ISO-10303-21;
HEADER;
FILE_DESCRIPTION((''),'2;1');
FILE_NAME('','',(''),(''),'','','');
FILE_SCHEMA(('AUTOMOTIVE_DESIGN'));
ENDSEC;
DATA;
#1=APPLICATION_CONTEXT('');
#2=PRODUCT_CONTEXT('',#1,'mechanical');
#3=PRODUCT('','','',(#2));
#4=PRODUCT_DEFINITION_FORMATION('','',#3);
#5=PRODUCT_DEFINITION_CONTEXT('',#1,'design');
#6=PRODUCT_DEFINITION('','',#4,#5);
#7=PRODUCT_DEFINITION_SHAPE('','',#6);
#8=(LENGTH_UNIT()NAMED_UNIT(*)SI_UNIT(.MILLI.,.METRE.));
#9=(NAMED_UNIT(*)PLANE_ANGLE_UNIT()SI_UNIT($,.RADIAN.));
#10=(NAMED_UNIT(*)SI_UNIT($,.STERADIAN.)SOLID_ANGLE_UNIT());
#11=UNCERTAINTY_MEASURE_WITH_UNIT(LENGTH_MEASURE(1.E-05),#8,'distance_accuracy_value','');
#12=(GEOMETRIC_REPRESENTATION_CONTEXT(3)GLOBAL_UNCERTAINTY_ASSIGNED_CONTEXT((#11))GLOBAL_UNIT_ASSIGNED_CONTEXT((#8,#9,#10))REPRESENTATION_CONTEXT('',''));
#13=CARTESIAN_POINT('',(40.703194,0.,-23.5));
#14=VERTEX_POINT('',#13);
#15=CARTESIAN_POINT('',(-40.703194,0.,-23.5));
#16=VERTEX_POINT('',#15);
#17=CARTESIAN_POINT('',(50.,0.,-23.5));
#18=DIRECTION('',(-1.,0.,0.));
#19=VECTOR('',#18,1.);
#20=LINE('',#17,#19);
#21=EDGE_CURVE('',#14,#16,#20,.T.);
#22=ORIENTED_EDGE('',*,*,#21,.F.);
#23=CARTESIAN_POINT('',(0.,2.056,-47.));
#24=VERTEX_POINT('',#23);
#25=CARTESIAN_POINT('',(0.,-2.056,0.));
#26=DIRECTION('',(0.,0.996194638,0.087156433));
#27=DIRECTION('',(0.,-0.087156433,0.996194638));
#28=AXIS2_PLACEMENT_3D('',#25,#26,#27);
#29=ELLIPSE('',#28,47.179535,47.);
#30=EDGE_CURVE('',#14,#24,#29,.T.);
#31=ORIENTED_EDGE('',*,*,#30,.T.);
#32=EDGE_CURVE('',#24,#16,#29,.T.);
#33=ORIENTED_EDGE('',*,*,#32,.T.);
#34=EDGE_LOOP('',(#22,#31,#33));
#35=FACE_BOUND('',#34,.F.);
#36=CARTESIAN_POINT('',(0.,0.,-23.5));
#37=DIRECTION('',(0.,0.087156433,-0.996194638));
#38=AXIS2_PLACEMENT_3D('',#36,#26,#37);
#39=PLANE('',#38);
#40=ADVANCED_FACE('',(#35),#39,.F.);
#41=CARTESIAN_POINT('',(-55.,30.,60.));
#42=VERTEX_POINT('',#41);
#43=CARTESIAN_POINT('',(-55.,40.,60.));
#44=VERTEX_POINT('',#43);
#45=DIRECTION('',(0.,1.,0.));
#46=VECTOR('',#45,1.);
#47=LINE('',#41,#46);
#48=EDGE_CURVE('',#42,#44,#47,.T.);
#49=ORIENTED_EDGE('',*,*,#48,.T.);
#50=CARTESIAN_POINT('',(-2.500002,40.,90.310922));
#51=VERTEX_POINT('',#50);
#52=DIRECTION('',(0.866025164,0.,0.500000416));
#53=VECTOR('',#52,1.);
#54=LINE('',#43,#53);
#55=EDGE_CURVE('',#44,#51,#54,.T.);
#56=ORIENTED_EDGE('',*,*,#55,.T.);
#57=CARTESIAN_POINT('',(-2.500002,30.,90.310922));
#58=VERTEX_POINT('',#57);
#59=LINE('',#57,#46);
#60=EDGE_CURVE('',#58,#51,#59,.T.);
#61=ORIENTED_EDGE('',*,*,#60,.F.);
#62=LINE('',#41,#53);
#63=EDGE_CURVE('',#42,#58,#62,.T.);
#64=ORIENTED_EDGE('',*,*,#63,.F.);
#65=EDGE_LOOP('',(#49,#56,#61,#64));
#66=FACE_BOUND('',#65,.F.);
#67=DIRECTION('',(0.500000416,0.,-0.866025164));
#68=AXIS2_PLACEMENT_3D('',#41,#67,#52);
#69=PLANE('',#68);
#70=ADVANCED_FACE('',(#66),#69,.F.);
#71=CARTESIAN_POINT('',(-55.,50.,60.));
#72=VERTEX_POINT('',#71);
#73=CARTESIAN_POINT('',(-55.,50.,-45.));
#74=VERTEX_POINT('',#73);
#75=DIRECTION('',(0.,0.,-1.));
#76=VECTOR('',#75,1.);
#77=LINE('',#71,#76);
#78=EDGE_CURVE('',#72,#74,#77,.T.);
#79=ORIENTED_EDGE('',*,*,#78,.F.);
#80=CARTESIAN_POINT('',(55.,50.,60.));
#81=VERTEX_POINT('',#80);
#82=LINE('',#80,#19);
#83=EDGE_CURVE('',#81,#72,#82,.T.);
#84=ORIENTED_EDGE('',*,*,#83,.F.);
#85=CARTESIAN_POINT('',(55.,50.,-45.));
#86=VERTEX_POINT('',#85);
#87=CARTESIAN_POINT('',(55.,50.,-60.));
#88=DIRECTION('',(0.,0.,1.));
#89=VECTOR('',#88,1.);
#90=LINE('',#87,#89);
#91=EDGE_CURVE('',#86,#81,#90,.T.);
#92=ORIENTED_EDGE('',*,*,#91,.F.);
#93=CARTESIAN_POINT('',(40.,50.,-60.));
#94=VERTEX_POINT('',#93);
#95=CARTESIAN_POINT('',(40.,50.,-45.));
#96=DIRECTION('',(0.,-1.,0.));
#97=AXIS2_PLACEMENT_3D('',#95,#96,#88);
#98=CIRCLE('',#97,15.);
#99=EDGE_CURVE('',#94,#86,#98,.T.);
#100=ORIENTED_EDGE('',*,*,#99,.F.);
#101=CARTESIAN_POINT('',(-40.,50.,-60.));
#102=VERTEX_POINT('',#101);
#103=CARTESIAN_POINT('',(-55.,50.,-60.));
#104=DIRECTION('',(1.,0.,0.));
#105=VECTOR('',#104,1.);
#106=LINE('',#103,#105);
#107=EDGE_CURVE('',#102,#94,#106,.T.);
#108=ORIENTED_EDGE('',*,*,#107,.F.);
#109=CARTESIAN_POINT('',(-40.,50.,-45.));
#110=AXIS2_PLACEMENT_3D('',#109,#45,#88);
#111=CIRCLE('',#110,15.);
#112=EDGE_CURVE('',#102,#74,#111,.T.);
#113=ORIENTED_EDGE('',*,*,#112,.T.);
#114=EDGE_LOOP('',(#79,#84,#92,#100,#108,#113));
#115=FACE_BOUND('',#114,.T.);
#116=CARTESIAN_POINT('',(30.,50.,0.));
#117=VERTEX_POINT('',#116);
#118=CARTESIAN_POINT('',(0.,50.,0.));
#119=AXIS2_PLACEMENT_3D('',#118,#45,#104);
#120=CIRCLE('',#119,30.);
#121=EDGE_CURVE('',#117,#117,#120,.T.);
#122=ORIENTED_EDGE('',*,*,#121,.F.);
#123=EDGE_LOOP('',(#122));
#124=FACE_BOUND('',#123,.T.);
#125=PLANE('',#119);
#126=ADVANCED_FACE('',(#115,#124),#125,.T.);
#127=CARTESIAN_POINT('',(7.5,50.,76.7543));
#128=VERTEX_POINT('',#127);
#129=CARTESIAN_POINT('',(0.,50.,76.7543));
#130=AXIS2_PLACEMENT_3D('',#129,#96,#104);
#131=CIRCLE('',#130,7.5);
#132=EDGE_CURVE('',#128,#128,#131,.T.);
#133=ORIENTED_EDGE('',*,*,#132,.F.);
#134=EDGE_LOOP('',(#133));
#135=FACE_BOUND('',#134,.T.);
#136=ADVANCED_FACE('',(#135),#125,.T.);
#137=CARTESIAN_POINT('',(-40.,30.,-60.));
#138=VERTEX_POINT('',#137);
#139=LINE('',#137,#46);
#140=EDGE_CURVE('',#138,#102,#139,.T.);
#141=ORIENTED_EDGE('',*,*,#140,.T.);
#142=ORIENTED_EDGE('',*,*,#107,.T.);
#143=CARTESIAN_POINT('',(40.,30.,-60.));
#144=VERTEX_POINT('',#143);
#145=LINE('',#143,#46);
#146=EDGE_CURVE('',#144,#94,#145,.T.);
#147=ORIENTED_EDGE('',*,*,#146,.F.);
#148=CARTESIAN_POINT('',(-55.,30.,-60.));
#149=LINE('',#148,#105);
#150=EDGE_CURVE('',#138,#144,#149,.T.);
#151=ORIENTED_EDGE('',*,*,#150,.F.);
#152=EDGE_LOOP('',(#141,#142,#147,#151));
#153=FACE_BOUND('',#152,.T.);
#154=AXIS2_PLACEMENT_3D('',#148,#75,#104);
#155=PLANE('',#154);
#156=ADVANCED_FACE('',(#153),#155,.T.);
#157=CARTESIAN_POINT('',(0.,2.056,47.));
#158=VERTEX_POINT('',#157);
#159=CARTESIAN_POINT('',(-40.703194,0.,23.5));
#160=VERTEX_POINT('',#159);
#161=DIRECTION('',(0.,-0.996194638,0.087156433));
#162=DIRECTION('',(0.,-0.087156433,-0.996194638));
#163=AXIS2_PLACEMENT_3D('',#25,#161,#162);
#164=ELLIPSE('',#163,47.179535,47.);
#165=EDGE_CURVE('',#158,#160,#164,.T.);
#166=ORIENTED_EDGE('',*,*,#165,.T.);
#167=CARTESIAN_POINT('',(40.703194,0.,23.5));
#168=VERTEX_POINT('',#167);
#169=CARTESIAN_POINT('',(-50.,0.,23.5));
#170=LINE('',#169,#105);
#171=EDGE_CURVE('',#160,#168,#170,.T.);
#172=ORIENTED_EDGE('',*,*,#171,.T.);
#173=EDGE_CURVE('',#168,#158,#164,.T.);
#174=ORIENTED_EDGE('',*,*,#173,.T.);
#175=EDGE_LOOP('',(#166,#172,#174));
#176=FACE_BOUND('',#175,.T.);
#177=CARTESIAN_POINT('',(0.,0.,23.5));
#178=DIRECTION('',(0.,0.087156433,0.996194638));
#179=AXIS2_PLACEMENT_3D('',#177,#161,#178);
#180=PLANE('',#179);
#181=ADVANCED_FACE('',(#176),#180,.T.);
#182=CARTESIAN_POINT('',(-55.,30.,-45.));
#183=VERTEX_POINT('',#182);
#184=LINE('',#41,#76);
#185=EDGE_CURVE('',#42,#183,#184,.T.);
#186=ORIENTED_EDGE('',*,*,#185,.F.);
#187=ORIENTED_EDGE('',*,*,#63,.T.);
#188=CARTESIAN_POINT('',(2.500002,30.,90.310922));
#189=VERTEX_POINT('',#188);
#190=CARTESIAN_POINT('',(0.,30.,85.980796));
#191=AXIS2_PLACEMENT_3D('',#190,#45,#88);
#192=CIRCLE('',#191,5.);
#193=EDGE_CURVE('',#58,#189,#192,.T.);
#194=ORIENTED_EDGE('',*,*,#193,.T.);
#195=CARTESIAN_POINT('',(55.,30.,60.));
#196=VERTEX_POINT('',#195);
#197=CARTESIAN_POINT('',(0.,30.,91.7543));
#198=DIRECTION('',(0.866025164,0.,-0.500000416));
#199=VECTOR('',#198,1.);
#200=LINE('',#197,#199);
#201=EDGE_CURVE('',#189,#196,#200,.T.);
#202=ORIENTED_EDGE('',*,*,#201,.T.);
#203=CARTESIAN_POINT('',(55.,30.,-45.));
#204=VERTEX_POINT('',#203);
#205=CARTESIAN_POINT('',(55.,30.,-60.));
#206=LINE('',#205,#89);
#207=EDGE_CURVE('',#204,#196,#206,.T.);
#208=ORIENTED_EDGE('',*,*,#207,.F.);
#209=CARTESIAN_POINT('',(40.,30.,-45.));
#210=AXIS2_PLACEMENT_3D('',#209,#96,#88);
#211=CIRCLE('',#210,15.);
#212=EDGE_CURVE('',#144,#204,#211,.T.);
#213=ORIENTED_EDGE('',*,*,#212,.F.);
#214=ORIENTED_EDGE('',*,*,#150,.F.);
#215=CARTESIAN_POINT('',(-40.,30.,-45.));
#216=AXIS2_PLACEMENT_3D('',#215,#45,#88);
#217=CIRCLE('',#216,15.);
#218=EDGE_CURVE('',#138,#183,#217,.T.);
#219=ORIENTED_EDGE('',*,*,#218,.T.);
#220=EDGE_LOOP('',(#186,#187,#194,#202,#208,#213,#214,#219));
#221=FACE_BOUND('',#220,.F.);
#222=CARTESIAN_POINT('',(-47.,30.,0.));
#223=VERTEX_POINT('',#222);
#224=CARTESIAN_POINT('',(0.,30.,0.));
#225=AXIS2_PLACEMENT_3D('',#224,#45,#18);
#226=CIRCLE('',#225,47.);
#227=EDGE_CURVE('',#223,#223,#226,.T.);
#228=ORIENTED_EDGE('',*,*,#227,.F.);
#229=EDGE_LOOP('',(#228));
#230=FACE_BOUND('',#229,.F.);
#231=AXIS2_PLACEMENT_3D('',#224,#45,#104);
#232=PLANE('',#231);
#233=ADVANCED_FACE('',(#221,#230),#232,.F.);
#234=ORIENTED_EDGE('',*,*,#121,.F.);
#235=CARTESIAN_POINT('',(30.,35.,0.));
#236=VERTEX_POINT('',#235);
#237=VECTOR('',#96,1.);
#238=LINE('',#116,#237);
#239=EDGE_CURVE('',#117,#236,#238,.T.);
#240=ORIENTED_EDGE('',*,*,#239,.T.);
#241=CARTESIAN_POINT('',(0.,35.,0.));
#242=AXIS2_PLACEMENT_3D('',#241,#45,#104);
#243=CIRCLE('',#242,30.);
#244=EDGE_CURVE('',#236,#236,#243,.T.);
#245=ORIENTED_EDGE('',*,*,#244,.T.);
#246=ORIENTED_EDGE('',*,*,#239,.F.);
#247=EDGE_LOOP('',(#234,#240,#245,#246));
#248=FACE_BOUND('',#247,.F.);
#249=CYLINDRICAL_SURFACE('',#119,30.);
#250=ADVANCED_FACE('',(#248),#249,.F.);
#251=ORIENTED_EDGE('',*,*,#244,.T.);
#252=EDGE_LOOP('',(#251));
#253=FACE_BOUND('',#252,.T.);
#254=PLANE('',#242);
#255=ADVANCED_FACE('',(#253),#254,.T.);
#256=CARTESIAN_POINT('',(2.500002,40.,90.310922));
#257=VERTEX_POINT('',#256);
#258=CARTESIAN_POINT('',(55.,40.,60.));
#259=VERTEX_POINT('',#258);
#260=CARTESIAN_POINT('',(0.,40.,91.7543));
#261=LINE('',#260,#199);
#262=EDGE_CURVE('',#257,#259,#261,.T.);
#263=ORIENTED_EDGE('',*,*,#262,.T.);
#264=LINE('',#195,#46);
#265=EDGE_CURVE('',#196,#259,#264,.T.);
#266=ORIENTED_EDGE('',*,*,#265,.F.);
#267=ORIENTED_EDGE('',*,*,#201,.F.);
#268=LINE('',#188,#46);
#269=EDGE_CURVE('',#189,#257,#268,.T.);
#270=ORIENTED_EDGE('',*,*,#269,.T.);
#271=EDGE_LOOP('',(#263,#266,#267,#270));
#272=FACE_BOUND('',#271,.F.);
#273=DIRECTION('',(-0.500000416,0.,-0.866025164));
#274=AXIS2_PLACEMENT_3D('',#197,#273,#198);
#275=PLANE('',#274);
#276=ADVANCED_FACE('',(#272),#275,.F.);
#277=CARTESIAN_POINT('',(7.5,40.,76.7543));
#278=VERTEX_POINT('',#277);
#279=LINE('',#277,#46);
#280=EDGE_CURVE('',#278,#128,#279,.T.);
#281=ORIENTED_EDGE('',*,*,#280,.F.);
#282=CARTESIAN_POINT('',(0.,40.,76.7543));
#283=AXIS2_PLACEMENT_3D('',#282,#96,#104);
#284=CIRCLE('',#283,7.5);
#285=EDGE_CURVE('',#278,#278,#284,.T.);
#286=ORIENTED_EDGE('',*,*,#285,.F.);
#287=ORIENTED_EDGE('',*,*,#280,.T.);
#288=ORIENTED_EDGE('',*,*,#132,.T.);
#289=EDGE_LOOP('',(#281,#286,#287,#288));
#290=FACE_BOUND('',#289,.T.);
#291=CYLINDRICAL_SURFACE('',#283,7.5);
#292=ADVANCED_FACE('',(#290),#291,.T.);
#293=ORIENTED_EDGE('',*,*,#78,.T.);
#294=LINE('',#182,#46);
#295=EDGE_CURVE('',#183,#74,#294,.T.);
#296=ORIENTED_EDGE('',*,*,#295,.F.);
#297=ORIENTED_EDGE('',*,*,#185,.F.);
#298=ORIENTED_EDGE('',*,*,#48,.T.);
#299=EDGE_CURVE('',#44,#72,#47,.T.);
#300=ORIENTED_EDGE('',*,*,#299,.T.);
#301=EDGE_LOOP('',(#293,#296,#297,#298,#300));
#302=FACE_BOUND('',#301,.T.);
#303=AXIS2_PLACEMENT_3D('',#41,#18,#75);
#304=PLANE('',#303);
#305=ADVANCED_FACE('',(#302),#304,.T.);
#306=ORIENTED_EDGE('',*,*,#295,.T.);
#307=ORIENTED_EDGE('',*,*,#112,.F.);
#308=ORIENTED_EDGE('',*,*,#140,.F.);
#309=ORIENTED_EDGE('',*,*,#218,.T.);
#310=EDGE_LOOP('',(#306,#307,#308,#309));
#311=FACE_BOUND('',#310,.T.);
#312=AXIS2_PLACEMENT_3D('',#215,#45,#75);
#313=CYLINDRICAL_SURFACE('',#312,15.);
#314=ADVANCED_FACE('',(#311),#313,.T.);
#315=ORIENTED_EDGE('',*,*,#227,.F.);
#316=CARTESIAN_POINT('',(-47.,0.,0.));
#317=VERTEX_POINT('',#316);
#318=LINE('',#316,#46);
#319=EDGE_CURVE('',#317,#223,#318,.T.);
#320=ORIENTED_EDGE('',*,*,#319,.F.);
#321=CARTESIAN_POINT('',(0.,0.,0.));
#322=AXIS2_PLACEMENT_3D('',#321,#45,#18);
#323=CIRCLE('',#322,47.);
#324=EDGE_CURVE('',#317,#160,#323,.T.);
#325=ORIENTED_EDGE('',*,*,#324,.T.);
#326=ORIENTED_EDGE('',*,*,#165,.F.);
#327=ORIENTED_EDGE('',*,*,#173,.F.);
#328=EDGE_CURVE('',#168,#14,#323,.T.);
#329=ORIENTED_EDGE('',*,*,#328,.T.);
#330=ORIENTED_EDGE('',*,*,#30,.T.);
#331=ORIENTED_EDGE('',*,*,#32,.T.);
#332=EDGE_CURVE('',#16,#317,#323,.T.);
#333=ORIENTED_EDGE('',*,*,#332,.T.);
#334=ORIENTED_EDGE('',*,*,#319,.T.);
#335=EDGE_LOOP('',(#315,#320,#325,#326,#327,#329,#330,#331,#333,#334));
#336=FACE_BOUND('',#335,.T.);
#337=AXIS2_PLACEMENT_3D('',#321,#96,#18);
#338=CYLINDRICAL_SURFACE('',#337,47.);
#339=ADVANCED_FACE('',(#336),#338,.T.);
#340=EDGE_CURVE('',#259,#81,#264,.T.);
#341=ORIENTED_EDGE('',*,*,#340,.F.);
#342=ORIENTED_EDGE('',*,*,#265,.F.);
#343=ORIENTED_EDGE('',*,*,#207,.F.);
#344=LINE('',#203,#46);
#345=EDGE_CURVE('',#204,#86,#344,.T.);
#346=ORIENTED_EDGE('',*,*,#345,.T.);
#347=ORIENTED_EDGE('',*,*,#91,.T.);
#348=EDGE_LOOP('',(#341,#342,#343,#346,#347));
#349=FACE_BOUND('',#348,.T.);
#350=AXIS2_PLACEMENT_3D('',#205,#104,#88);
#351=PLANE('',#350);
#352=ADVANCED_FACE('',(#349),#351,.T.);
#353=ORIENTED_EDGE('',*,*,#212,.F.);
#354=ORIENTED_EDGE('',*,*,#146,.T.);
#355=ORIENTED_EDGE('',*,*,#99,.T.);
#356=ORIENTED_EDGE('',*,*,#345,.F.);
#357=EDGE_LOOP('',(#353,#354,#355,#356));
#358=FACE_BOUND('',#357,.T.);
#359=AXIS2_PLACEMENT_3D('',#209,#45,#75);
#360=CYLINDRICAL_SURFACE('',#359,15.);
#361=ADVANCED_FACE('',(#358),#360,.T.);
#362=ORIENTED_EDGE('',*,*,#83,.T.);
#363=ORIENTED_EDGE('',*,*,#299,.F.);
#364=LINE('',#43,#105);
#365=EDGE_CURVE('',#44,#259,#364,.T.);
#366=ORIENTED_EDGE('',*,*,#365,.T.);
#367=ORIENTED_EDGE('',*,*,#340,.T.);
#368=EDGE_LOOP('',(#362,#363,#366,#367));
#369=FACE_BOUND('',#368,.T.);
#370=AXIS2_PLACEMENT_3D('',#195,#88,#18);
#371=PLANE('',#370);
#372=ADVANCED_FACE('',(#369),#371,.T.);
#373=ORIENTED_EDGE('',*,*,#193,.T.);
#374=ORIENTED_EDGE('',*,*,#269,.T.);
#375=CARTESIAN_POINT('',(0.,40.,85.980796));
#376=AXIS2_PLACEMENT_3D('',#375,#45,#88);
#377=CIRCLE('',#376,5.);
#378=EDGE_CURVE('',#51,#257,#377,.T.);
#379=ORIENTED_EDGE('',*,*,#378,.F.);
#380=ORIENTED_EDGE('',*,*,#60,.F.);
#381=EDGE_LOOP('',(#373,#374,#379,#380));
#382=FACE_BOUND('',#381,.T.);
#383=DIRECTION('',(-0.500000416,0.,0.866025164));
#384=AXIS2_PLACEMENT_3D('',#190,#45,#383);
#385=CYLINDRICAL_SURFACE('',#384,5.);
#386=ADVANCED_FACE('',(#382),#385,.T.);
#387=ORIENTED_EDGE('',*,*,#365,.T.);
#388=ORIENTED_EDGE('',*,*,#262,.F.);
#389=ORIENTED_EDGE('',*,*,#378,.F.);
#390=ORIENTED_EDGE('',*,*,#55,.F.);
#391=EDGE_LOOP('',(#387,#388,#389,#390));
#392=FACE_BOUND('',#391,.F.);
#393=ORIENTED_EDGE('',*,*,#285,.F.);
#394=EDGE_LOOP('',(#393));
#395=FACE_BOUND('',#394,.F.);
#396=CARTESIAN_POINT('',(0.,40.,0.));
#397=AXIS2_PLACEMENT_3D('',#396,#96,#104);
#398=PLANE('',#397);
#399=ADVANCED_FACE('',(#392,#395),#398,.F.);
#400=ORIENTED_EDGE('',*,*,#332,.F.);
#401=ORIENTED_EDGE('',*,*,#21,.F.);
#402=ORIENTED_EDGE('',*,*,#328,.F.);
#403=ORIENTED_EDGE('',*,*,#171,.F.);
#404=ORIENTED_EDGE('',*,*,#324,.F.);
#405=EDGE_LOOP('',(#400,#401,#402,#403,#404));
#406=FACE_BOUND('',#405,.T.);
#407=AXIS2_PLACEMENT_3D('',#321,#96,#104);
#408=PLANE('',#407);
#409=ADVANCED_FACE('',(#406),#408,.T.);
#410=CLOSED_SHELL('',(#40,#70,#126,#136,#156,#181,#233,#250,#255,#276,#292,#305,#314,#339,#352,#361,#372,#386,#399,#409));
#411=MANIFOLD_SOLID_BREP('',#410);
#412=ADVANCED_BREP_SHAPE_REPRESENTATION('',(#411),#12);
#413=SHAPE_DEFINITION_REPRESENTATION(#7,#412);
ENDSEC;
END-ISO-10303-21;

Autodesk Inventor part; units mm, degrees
ref_plane "YZ Plane" through (0, 0, 0) normal (1, 0, 0) x (0, 1, 0)
ref_plane "XZ Plane" through (0, 0, 0) normal (0, 1, 0) x (-1, 0, 0)
sketch "스케치1" plane through (0, 0, 0) normal (0, 1, 0) x (-1, 0, 0)
  circle A0 centre (0, 0) radius 47
  circle A1 centre (0, 0) radius 35
  line L0 (0, 0) -> (0, 145.5)
  circle A2 centre (0, 145.5) radius 48.5
  circle A3 centre (0, 145.5) radius 36.5
  dimension "d0" = 94
  dimension "d1" = 12
  dimension "d2" = 145.5
  dimension "d3" = 97
  dimension "d4" = 12
extrude "돌출1" add sketch "스케치1" along normal blind 30 contours A0
sketch "스케치2" plane through (0, 30, 0) normal (0, 1, 0) x (1, 0, 0)
  line L0 (-55, 60) -> (55, 60)
  line L1 (55, 60) -> (55, -60)
  line L2 (55, -60) -> (-55, -60)
  line L3 (-55, -60) -> (-55, 60)
  line L4 (-55, 60) -> (55, -60) construction
  line L5 (55, 60) -> (-55, -60) construction
  point P0 (0, 0)
  dimension "d7" = 110
  dimension "d8" = 120
extrude "돌출2" add sketch "스케치2" along normal blind 20
sketch "스케치3" plane through (0, 30, 0) normal (0, -1, 0) x (1, 0, 0)
  line L0 (-55, 60) -> (55, 60) projected
  line L1 (-55, 60) -> (0, 91.7543)
  line L2 (-55, 60) -> (8.5085, 60) construction
  line L3 (0, 91.7543) -> (55, 60)
  line L4 (55, 60) -> (-55, 60)
  line L5 (0, 91.7543) -> (0, 76.7543)
  circle A0 centre (0, 76.7543) radius 7.5
  point P0 (0, 0)
  dimension "d11" = 30
  dimension "d12" = 15
  dimension "d13" = 15
  dimension "d20" = 30
extrude "돌출3" add sketch "스케치3" against normal blind 10 contours L1 L3 L0 | A0
sketch "스케치4" plane through (0, 40, 0) normal (0, 1, 0) x (1, 0, 0)
  line L0 (55, -60) -> (0, -91.7543) projected
  line L1 (0, -91.7543) -> (0, -76.7543)
  circle A0 centre (0, -76.7543) radius 7.5
  point P0 (0, 0)
  dimension "d16" = 15
  dimension "d17" = 15
extrude "돌출4" add sketch "스케치4" along normal blind 10
fillet "모깎기1" radius 15 2 edges at (-55, 40, -60) (55, 40, -60)
ref_plane "작업 평면1" through (0, 50, 0) normal (0, 1, 0) x (1, 0, 0)
sketch "스케치6" plane through (0, 50, 0) normal (0, 1, 0) x (1, 0, 0)
  circle A0 centre (0, 0) radius 30
extrude "돌출6" cut sketch "스케치6" against normal blind 15
fillet "모깎기2" radius 5 1 edges at (0, 35, 91.7543)
sketch "스케치7" plane through (0, 0, 0) normal (0, -1, 0) x (1, 0, 0)
  circle A0 centre (0, 0) radius 35
extrude "돌출7" add sketch "스케치7" against normal up to surface (30 mm away)
sketch "스케치8" plane through (0, 0, 0) normal (1, 0, 0) x (0, 1, 0)
  line L0 (0, -47) -> (0, 47) projected
  line L1 (0, 0) -> (0, 47)
  line L2 (0, 23.5) -> (2.056, 47)
  line L3 (0, 47) -> (30, 47) projected
  line L4 (0, 23.5) -> (23.5898, 23.5) construction
  line L5 (2.056, 47) -> (0, 47)
  line L6 (0, 0) -> (0, -47)
  line L7 (0, -23.5) -> (0, -47)
  line L8 (0, -47) -> (30, -47) projected
  line L9 (0, -47) -> (0, -47)
  line L10 (0, -23.5) -> (0, -47)
  line L11 (0, -47) -> (0, -47)
  line L12 (0, -23.5) -> (2.056, -47)
  line L13 (0, -23.5) -> (23.5898, -23.5) construction
  line L14 (2.056, -47) -> (0, -47)
  dimension "d31" = 85
  dimension "d32" = 85
extrude "돌출8" cut sketch "스케치8" along normal mid plane 100
properties part number "bracket_1"
